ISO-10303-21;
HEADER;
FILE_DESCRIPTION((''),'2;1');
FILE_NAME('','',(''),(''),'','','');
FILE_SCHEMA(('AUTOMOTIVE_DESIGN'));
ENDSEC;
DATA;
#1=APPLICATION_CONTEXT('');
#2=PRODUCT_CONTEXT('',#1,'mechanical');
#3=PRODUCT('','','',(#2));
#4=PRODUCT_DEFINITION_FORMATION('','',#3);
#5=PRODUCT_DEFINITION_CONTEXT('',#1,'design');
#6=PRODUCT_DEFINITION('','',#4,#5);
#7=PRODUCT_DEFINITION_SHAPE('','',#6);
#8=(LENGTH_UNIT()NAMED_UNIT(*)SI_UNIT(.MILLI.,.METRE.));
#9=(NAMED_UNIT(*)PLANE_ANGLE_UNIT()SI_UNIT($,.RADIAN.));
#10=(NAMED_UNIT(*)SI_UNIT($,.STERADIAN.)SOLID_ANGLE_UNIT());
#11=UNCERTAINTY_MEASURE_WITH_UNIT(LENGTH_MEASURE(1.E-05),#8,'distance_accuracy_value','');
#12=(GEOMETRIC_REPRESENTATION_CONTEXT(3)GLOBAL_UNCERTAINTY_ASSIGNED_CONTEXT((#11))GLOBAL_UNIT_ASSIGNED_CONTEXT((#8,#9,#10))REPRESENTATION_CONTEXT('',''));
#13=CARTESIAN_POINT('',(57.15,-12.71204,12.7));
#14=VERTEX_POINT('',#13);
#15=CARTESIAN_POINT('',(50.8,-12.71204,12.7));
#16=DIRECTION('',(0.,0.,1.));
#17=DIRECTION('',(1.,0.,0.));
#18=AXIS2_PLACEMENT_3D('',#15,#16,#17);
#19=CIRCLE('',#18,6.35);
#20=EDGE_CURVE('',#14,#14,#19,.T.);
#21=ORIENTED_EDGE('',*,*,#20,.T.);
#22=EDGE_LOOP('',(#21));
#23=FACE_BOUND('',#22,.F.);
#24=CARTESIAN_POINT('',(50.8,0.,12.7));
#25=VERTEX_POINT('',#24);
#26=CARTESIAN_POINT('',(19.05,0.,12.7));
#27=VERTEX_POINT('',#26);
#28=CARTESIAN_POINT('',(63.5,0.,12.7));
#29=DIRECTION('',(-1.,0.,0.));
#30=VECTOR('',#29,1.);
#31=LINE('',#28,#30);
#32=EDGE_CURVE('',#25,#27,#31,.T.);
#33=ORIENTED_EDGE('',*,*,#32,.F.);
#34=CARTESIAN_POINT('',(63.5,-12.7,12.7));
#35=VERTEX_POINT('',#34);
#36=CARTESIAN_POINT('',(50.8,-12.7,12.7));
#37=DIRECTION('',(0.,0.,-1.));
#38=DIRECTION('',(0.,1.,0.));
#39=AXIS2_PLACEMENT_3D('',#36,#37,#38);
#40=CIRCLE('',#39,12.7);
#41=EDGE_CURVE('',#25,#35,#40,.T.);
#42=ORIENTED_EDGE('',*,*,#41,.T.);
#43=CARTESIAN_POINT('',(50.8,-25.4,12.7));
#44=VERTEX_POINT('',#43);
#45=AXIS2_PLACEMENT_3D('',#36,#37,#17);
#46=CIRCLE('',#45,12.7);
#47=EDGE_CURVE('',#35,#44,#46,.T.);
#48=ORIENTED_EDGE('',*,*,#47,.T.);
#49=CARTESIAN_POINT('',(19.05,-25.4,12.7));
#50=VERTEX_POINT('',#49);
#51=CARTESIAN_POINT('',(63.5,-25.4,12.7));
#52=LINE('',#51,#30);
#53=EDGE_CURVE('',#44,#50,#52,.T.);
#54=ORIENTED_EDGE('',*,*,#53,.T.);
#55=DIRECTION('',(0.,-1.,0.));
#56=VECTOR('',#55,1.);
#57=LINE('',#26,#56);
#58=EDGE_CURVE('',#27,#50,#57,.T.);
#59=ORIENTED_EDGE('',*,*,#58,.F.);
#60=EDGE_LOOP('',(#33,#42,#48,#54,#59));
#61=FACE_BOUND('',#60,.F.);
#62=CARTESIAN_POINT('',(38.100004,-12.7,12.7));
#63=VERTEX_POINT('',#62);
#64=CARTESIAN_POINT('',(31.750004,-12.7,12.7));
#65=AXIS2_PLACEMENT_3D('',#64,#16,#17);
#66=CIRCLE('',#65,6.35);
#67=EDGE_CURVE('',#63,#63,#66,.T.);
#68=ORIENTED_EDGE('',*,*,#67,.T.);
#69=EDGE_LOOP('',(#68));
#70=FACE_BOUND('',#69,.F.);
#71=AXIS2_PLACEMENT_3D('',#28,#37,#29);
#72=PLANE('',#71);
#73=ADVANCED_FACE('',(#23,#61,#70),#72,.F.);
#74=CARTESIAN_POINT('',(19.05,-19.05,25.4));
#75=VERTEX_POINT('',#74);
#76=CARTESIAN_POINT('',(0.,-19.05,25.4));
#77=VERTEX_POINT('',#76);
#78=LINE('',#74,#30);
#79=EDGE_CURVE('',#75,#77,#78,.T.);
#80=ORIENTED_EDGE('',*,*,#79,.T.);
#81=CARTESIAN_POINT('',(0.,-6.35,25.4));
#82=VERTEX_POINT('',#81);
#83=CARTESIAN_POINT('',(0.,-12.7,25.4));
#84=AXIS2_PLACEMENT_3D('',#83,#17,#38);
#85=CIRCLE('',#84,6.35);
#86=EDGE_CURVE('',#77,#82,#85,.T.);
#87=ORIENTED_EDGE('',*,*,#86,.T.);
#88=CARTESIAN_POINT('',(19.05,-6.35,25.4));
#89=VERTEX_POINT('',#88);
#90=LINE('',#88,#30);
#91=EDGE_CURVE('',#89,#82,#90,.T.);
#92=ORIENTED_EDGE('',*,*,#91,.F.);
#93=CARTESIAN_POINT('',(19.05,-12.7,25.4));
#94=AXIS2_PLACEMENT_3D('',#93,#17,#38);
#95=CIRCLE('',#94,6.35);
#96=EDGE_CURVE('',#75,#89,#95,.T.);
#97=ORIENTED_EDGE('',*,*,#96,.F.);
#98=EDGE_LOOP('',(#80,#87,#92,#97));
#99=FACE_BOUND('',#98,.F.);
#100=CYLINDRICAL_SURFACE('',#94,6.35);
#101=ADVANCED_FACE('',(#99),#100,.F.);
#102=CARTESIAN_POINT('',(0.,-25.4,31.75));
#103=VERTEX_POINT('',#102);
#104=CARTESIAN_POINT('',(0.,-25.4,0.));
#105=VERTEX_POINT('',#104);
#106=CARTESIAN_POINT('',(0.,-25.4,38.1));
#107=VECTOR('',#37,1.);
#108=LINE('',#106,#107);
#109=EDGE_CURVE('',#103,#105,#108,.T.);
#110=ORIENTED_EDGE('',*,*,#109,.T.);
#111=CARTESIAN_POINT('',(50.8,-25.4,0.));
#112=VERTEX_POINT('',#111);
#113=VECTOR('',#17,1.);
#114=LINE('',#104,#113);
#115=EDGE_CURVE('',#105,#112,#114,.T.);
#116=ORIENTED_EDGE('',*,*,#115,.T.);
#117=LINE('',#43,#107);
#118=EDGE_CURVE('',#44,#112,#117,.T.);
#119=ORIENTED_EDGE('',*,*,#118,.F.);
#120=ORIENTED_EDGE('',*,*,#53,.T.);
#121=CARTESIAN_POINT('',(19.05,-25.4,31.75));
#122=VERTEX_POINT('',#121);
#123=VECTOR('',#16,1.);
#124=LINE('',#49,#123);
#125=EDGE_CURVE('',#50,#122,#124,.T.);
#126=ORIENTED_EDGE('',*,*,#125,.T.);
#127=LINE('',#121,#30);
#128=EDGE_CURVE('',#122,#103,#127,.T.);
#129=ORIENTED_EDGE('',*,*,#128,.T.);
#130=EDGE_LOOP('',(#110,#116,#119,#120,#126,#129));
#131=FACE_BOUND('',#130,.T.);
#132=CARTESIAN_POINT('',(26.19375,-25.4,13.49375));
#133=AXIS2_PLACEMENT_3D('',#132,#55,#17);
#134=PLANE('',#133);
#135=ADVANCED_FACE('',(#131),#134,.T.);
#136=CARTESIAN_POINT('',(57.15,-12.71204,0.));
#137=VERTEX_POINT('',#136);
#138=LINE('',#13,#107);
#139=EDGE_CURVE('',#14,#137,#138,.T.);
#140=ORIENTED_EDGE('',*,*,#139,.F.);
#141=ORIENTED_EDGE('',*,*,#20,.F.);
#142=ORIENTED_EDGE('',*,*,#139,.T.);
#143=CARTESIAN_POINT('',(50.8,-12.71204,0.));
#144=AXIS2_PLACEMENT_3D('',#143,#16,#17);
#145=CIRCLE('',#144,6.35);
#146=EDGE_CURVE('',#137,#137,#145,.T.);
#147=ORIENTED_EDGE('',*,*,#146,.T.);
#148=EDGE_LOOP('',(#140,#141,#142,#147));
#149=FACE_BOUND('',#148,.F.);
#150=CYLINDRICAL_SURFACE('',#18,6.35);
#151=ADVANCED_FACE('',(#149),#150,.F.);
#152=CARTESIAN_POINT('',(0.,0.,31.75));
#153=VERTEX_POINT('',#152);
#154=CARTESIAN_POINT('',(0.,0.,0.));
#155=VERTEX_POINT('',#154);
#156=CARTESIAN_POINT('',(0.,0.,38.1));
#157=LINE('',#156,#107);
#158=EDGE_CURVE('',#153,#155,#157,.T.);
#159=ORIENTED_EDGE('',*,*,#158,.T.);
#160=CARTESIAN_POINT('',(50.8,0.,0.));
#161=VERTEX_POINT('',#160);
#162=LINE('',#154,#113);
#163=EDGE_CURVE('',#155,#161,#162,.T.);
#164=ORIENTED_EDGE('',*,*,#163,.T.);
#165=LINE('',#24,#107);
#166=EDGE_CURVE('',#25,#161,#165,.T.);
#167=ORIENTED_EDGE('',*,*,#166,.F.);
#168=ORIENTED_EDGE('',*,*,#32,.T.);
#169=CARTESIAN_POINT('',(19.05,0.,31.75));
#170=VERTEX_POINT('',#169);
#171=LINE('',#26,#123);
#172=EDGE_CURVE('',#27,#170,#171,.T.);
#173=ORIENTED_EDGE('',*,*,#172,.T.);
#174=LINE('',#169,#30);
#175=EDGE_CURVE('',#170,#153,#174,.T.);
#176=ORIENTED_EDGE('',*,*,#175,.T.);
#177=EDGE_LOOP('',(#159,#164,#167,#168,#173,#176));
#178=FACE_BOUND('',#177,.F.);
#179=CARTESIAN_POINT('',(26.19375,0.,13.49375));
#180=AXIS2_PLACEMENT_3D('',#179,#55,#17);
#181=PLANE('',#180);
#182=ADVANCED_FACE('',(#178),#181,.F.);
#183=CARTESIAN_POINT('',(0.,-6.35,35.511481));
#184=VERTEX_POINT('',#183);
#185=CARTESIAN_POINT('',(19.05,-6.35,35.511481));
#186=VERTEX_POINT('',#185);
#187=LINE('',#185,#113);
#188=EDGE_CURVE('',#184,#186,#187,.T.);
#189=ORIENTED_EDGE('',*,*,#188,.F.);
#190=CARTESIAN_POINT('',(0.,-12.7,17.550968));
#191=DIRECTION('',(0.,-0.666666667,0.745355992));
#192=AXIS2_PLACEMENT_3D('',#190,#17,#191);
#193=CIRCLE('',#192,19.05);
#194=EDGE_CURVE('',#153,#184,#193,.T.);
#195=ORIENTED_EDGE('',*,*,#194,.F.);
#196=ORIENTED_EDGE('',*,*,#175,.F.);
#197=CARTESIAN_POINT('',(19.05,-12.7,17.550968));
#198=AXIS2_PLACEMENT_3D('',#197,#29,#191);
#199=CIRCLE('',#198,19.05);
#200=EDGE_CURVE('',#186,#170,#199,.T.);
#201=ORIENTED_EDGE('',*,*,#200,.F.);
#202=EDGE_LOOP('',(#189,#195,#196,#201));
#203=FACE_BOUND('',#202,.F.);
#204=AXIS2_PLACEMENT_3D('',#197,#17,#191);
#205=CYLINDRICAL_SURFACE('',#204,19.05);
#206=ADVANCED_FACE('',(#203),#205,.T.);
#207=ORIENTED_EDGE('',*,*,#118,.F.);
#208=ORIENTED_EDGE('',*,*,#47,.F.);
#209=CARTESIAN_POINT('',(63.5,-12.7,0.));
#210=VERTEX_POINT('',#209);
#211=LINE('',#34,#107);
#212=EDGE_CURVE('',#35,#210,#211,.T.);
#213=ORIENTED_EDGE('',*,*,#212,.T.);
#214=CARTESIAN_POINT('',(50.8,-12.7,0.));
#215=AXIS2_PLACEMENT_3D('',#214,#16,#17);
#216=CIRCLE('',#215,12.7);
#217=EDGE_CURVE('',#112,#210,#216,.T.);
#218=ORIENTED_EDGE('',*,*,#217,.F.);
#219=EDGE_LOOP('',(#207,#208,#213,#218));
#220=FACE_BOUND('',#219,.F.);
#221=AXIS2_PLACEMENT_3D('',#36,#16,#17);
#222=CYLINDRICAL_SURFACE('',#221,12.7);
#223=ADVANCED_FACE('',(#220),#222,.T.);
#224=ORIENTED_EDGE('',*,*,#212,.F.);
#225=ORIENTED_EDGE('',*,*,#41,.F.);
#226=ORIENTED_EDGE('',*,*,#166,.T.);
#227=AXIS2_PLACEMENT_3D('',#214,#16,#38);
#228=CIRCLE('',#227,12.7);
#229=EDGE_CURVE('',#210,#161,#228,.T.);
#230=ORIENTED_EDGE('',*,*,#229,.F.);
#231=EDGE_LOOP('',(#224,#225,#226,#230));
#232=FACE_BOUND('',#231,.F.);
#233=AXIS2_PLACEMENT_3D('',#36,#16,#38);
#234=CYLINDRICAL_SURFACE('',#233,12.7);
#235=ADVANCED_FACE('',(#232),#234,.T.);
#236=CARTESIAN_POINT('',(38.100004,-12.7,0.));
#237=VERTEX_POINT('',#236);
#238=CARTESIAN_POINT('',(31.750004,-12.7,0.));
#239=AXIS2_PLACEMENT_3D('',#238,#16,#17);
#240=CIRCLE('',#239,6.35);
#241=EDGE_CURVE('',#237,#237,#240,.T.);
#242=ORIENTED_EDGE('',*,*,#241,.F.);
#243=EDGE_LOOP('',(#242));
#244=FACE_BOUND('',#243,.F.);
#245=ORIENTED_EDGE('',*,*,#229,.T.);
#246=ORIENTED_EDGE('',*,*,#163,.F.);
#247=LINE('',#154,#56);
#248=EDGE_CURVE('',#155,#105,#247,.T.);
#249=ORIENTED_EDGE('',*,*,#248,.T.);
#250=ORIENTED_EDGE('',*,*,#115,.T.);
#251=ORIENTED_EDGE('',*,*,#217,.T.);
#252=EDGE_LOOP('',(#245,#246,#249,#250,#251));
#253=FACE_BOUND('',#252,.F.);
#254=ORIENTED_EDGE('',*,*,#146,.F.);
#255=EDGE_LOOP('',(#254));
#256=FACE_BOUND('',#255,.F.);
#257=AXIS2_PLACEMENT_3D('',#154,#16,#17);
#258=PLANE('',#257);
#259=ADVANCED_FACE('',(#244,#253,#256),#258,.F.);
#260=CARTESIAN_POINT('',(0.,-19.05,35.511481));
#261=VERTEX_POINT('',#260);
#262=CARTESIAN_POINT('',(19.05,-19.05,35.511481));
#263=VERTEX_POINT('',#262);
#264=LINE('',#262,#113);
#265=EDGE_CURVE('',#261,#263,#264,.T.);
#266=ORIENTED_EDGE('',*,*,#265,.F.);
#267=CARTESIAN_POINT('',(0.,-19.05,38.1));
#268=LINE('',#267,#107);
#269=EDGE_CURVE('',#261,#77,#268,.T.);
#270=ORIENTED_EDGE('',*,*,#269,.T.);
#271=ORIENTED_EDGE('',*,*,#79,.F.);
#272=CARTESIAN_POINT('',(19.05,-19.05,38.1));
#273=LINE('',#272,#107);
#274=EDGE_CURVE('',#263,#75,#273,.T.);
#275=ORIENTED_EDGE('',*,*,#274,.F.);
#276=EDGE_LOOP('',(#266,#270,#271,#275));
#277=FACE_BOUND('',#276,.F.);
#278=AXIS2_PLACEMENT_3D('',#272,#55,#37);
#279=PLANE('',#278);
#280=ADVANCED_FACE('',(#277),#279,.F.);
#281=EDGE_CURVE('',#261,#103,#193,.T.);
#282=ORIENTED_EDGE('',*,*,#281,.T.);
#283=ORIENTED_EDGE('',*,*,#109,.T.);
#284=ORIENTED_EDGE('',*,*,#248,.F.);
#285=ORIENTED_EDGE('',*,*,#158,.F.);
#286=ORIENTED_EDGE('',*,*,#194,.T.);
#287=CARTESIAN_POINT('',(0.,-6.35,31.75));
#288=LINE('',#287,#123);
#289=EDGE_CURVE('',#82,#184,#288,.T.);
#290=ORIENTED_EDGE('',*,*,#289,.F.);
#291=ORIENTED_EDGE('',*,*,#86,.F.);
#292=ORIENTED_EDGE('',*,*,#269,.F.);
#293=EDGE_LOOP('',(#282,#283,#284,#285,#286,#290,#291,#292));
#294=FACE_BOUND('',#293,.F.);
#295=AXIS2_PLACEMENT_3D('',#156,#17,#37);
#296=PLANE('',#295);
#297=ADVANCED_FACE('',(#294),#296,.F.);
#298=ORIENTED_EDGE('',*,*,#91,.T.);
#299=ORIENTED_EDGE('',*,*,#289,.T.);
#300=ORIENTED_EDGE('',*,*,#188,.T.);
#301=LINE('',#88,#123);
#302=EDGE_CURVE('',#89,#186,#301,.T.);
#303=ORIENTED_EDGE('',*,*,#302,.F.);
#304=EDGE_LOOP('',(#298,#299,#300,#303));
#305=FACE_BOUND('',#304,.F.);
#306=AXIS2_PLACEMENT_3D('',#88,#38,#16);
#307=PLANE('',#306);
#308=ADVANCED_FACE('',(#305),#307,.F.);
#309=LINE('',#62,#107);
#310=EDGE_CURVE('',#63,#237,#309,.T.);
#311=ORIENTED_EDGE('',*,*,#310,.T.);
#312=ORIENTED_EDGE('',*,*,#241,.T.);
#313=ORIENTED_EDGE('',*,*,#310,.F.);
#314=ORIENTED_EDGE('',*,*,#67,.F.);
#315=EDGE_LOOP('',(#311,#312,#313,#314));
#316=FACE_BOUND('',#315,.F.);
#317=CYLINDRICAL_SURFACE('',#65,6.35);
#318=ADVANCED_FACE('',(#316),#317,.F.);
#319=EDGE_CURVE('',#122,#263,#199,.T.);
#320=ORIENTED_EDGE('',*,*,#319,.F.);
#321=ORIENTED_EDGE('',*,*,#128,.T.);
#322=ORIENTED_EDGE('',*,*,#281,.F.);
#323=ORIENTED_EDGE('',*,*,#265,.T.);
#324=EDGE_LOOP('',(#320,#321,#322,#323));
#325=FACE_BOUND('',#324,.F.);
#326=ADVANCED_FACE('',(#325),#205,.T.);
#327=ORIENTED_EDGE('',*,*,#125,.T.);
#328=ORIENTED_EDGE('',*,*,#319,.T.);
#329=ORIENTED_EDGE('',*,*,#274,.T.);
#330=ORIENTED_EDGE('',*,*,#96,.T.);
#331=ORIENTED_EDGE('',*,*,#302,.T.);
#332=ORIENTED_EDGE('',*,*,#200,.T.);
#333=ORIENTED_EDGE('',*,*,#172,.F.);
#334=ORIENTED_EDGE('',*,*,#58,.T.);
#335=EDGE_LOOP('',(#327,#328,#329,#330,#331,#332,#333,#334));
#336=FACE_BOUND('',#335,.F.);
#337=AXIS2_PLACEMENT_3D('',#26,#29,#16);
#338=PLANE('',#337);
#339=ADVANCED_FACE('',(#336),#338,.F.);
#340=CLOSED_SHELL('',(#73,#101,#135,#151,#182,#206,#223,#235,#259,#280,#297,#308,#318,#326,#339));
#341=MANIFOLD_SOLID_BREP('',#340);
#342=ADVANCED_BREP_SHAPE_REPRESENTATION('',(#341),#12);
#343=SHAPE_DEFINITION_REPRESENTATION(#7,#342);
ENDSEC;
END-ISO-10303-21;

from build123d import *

# Parameters (mm, degrees)
F1_DEPTH  = 25.4
F2_R      = 6.35
F3_DEPTH  = 25.4
F5_DEPTH  = 25.4
F8_DEPTH  = 25.4
F10_DEPTH = 25.4


with BuildPart() as f1:
    # F0 (on Front) → F1 (new body)
    with BuildSketch(Plane.XZ):
        Polygon((0, 38.1), (0, 0), (63.5, 0), (63.5, 12.7), (19.05, 12.7), (19.05, 38.1), align=None)
    extrude(amount=F1_DEPTH)

    # F2 (on face) → F3 (cut)
    with BuildSketch(Plane.XY.offset(12.7)):
        with Locations((31.7500038045, -12.7)):
            Circle(F2_R)
        with Locations((50.8, -12.7120396)):
            Circle(F2_R)
    extrude(amount=-F3_DEPTH, mode=Mode.SUBTRACT)

    # F4 (on face) → F5 (cut)
    with BuildSketch(Plane.XY.offset(12.7)):
        with BuildLine():
            ThreePointArc((63.5, -12.7), (59.7802561211, -21.6802561211), (50.8, -25.4))
            Line((50.8, -25.4), (63.5, -25.4))
            Line((63.5, -25.4), (63.5, -12.7))
        make_face()
        with BuildLine():
            ThreePointArc((50.8, 0), (59.7802561211, -3.7197438789), (63.5, -12.7))
            Line((63.5, -12.7), (63.5, 0))
            Line((63.5, 0), (50.8, 0))
        make_face()
    extrude(amount=-F5_DEPTH, mode=Mode.SUBTRACT)

    # F7 (on face) → F8 (cut)
    with BuildSketch(Plane.YZ.offset(19.05)):
        with BuildLine():
            ThreePointArc((-19.05, 25.4), (-12.7, 19.05), (-6.35, 25.4))
            ThreePointArc((-6.35, 25.4), (-12.7, 31.75), (-19.05, 25.4))
        make_face()
        with BuildLine():
            ThreePointArc((-19.05, 25.4), (-12.7, 31.75), (-6.35, 25.4))
            Line((-6.35, 25.4), (-6.35, 38.1))
            Line((-6.35, 38.1), (-19.05, 38.1))
            Line((-19.05, 38.1), (-19.05, 25.4))
        make_face()
    extrude(amount=-F8_DEPTH, mode=Mode.SUBTRACT)

    # F9 (on face) → F10 (cut)
    with BuildSketch(Plane.YZ.offset(19.05)):
        with BuildLine():
            ThreePointArc((-25.4, 31.75), (-12.7, 36.6009683429), (0, 31.75))
            Line((0, 31.75), (0, 38.1))
            Line((0, 38.1), (-25.4, 38.1))
            Line((-25.4, 38.1), (-25.4, 31.75))
        make_face()
    extrude(amount=-F10_DEPTH, mode=Mode.SUBTRACT)


solid = f1.part
